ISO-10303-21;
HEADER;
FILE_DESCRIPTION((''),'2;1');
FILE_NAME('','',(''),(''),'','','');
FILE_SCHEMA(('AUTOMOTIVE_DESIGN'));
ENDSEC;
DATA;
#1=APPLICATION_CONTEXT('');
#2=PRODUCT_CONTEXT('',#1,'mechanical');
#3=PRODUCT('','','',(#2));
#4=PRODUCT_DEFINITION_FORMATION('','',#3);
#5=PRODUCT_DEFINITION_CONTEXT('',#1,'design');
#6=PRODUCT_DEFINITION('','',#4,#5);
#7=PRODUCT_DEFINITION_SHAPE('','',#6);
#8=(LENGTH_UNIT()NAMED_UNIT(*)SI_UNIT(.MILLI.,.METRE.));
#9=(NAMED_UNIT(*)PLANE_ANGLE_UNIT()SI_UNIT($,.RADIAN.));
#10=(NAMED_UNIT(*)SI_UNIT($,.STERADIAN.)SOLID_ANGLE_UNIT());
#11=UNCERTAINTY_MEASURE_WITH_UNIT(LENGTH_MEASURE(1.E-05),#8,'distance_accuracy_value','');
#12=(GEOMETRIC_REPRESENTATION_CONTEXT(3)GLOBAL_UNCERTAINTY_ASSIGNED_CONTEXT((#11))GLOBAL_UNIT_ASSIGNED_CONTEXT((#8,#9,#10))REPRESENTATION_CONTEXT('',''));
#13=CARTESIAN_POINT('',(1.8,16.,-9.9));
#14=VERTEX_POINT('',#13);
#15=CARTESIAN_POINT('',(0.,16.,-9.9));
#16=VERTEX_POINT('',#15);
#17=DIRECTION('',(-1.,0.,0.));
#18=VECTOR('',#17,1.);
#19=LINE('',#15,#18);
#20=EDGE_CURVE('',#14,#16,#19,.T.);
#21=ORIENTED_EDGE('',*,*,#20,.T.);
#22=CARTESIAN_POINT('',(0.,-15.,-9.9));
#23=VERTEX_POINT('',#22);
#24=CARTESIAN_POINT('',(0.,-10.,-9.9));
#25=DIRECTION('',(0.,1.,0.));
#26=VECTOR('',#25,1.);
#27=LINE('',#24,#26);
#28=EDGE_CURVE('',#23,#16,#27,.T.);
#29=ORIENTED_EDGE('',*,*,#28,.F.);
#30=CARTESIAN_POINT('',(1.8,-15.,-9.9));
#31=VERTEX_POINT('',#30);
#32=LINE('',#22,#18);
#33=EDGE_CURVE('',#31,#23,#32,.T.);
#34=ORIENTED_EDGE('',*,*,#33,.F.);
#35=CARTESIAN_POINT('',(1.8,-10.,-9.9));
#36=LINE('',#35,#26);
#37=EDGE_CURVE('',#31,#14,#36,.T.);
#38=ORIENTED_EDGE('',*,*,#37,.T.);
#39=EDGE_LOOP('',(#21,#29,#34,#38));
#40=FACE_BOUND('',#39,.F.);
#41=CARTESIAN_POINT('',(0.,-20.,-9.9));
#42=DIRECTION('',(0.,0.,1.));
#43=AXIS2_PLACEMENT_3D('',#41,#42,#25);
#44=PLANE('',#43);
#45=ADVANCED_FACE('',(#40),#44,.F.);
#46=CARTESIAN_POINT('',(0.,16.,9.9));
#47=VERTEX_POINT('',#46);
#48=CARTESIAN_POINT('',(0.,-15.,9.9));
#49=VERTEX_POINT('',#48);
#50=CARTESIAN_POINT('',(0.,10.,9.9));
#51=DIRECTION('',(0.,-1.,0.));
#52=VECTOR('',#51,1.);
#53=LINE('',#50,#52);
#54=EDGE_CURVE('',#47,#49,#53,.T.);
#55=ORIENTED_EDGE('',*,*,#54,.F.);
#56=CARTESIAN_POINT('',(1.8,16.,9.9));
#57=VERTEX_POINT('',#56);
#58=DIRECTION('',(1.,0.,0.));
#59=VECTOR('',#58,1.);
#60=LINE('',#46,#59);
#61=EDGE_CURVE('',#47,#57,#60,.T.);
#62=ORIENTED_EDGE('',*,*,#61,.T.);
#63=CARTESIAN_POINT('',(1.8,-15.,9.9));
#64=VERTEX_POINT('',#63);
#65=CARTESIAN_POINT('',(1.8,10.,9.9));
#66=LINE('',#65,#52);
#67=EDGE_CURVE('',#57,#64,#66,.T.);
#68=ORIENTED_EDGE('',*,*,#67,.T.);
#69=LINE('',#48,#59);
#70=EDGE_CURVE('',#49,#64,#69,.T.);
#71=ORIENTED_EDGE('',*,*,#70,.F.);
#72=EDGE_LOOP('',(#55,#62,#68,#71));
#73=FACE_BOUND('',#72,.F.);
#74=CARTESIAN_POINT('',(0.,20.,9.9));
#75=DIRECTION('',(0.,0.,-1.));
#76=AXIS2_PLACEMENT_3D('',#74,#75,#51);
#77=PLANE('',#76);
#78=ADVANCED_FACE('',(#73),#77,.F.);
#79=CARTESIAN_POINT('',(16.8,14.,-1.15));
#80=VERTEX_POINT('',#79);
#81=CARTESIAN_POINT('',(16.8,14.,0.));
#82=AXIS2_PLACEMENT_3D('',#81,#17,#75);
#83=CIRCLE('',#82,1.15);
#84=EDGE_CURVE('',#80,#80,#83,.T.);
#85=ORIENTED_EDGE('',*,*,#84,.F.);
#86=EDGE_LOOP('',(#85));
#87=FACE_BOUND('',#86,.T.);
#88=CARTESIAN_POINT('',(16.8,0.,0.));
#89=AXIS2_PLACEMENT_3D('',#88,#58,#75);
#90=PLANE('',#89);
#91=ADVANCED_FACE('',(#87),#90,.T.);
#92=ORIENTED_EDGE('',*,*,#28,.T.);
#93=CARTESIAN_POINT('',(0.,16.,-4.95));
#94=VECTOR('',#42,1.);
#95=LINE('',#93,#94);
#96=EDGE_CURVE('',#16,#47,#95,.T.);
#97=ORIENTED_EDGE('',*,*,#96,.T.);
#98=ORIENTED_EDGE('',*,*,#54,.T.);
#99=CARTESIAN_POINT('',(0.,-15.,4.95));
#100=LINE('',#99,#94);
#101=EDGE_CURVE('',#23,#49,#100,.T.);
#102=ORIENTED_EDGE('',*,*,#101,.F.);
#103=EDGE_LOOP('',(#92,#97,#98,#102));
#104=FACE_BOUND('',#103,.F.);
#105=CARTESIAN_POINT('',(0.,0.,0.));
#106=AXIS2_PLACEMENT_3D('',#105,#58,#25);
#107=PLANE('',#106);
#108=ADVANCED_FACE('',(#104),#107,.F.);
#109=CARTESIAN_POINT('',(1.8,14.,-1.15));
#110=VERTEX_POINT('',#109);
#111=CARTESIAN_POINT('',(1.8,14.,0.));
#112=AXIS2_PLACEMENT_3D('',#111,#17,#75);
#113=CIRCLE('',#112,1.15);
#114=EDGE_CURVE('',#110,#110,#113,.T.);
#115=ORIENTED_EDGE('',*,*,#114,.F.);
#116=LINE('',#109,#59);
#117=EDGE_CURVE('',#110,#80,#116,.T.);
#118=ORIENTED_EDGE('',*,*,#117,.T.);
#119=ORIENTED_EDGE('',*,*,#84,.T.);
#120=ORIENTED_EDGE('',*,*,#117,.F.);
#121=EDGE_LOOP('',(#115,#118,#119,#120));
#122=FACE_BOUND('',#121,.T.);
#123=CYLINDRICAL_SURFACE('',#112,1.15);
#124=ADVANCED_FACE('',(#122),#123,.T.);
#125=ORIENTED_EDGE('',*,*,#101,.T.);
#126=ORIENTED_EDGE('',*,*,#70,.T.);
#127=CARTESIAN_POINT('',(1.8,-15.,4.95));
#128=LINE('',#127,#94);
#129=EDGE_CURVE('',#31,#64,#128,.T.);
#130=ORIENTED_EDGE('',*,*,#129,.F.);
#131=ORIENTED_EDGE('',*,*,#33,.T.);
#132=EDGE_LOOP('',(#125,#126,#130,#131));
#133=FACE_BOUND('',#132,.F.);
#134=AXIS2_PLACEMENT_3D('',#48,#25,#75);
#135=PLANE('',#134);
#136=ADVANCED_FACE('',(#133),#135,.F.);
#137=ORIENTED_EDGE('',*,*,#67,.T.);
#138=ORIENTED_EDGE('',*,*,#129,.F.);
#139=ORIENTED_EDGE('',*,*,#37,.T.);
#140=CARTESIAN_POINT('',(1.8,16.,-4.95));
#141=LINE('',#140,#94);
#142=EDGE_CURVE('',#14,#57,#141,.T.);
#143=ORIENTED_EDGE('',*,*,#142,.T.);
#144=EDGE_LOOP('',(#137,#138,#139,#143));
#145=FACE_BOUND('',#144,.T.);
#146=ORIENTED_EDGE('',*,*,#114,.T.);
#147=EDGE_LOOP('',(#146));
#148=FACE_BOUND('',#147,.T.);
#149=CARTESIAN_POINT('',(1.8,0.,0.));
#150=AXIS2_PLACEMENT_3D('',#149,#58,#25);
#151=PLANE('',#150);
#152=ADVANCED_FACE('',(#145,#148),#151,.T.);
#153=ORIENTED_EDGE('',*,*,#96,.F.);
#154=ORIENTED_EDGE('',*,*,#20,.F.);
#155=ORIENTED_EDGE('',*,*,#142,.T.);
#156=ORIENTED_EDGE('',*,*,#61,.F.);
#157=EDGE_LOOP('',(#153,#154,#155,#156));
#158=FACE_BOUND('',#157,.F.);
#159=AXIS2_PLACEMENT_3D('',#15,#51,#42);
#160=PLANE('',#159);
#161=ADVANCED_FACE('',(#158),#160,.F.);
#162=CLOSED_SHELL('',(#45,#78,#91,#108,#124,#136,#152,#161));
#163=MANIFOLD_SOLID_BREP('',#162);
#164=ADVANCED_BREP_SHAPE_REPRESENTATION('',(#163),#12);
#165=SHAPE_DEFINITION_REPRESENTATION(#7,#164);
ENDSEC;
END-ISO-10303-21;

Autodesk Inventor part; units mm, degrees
ref_plane "YZ Plane" through (0, 0, 0) normal (1, 0, 0) x (0, 1, 0)
ref_plane "XZ Plane" through (0, 0, 0) normal (0, 1, 0) x (-1, 0, 0)
ref_plane "XY Plane" through (0, 0, 0) normal (0, 0, 1) x (1, 0, 0)
sketch "Sketch1" plane through (0, 0, 0) normal (1, 0, 0) x (0, 1, 0)
  line L0 (20, 9.9) -> (-20, 9.9)
  line L1 (-20, 9.9) -> (-20, -9.9)
  line L2 (-20, -9.9) -> (20, -9.9)
  line L3 (20, -9.9) -> (20, 9.9)
  point P0 (0, 0)
  point P1 (0, 9.9)
  point P2 (-20, 0)
  dimension "d0" = 19.8
  dimension "d1" = 40
extrude "Extrusion1" add sketch "Sketch1" along normal blind 1.8
sketch "Sketch2" plane through (1.8, 0, 0) normal (1, 0, 0) x (0, 0, -1)
  circle A0 centre (0, 14) radius 1.15
  line L0 (-9.9, -20) -> (9.9, -20) projected
  point P0 (0, 0)
  dimension "d4" = 2.3
  dimension "d5" = 34
extrude "Extrusion2" add sketch "Sketch2" along normal blind 10
thicken "Thicken1" operation add thickness 10 both sides no extend neighbours yes toward (0, 1, 0) faces at (0.6, -20, 3.3)
thicken "Thicken2" operation add thickness 5 both sides no extend neighbours yes toward (0, -1, 0) faces at (0.6, -10, 3.3)
thicken "Thicken3" operation add thickness 2 both sides no extend neighbours yes toward (0, 1, 0) faces at (0.6, -15, 3.3)
thicken "Thicken4" operation add thickness 4 both sides no extend neighbours yes toward (0, -1, 0) faces at (0.6, 20, -3.3)
thicken "Thicken5" operation add thickness 2 both sides no extend neighbours yes toward (0, -1, 0) faces at (0.6, -13, 3.3)
thicken "Thicken6" operation add thickness 5 both sides no extend neighbours yes toward (1, 0, 0) faces at (11.8, 13.5623, 0.2869)
properties part number "sample-transfer_slider"
